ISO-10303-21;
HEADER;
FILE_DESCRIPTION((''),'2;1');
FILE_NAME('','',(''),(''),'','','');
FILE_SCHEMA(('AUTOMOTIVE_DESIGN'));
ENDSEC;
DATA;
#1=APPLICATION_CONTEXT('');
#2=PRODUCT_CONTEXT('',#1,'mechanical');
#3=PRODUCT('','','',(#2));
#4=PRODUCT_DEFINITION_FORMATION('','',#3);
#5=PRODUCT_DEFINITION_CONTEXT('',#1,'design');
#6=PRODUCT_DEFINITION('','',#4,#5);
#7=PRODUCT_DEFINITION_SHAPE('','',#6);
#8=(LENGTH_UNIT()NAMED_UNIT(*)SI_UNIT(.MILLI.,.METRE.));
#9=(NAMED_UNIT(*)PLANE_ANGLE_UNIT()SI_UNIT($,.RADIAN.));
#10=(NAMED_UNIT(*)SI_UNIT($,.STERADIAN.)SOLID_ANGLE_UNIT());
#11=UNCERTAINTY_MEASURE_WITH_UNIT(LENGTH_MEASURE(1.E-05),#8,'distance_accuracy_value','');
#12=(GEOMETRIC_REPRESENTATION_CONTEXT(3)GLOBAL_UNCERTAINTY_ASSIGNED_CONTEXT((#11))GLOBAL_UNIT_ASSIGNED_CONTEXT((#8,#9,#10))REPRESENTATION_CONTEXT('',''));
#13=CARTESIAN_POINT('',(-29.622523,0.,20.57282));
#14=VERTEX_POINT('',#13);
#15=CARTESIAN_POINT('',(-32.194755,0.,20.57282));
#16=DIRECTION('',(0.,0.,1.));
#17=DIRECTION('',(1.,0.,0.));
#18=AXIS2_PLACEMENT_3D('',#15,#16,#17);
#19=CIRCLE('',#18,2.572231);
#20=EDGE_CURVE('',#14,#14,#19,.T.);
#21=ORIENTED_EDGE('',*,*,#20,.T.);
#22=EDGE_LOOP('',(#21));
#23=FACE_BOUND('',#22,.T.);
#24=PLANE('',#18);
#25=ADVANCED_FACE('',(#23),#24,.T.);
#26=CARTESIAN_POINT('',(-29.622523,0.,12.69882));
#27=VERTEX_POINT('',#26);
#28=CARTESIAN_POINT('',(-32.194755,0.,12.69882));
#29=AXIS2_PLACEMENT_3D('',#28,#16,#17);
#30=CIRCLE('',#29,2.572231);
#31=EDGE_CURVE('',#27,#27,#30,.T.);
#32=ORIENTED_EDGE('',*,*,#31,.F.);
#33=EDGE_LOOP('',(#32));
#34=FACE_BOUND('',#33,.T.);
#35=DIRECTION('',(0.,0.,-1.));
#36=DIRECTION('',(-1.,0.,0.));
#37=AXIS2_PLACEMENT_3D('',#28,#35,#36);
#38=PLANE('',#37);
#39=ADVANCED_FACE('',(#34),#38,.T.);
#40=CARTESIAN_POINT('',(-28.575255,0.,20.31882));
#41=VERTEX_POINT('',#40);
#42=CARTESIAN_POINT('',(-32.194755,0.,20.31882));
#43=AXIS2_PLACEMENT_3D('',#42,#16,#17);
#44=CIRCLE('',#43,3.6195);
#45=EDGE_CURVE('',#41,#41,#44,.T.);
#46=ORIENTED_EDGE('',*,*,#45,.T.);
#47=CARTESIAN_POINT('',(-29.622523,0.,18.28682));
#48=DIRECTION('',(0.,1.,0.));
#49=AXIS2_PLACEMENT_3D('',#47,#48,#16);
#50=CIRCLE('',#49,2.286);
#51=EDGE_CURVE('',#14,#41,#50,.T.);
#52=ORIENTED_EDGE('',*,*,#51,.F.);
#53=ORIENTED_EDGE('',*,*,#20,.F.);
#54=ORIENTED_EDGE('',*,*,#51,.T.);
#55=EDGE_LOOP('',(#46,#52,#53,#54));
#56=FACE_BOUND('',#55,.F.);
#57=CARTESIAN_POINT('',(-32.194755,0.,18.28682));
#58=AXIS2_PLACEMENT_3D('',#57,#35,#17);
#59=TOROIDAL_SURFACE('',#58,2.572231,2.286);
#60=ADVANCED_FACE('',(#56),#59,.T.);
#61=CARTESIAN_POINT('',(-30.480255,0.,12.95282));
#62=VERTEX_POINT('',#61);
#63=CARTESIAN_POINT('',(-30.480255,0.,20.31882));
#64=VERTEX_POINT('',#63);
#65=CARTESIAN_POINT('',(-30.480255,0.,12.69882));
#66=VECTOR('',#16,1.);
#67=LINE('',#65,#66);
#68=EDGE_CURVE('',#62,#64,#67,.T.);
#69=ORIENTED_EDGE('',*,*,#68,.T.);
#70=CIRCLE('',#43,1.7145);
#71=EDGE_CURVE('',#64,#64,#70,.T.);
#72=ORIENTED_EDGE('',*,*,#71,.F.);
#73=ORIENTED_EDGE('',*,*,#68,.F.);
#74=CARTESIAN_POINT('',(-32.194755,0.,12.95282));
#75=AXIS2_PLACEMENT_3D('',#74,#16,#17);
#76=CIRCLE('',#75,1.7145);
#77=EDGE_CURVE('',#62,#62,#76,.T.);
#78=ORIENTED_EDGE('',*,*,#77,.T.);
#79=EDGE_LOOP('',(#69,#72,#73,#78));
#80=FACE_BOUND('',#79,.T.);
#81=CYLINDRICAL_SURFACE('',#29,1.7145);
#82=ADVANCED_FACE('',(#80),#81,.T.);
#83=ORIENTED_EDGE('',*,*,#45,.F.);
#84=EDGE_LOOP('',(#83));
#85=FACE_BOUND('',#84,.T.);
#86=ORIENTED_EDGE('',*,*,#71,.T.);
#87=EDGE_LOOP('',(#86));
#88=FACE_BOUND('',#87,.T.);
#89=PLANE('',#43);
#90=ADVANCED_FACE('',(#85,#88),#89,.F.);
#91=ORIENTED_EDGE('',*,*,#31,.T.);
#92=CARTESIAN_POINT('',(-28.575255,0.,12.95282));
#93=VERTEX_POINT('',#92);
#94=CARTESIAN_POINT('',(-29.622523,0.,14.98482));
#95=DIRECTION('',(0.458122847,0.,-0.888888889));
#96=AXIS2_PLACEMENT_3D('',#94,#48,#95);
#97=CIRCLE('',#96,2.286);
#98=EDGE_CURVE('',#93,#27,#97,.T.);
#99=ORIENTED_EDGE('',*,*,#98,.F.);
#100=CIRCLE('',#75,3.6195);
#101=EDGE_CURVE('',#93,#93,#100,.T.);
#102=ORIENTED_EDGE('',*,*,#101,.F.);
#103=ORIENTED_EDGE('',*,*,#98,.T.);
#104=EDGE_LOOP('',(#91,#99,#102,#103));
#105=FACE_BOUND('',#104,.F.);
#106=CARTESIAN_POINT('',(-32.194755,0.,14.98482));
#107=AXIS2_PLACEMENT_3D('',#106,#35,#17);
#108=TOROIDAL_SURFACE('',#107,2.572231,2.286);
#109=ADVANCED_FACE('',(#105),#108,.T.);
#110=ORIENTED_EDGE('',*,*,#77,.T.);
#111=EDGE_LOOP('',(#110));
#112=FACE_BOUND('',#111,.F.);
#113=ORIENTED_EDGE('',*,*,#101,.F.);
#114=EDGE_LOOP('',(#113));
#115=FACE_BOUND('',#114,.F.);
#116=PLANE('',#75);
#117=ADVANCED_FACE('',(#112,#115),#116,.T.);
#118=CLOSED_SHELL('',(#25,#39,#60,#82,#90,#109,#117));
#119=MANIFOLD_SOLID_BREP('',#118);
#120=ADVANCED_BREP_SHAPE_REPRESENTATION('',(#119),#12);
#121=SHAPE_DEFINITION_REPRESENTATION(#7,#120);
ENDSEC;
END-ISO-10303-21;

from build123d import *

# Parameters (mm, degrees)
F0_W = 1.905
F0_H = 0.254


# Not quite as in the source:
# - a fillet or chamfer that OpenCascade refuses, or shapes differently, is made with other operations: its cross-section is extruded or revolved along the edge and cut away or added


with BuildPart() as f1:
    # F0 (on Front) → F1 (revolve)
    with BuildSketch(Plane.XZ):
        with Locations((-29.5277546042, 20.4458203979)):
            Rectangle(F0_W, F0_H)
        Polygon((-30.4802546042, 20.3188203979), (-30.4802546042, 20.5728203979), (-32.1947546042, 20.5728203979), (-32.1947546042, 12.6988203979), (-30.4802546042, 12.6988203979), (-30.4802546042, 12.9528203979), align=None)
        with Locations((-29.5277546042, 12.8258203979)):
            Rectangle(F0_W, F0_H)
    revolve(axis=Axis((-32.1947546042, 0, 16.6358203979), (0, 0, 1)))

    # F2: fillet of radius 2.286 on 1 edges, made by hand

    # F2_s1 → F2_t2 (revolve, cut)
    with BuildSketch(Plane.XZ):
        with BuildLine():
            ThreePointArc((-29.6225234331, 20.5728203979), (-29.0837080659, 20.5084130698), (-28.5752546042, 20.3188203979))
            Line((-28.5752546042, 20.3188203979), (-28.5752546042, 20.5728203979))
            Line((-28.5752546042, 20.5728203979), (-29.6225234331, 20.5728203979))
        make_face()
    revolve(axis=Axis((-32.1947546042, 0, 20.5728203979), (0, 0, 1)), mode=Mode.SUBTRACT)

    # F3: fillet of radius 2.286 on 1 edges, made by hand

    # F3_s1 → F3_t2 (revolve, cut)
    with BuildSketch(Plane.XZ):
        with BuildLine():
            ThreePointArc((-28.5752546042, 12.9528203979), (-29.0837080659, 12.763227726), (-29.6225234331, 12.6988203979))
            Line((-29.6225234331, 12.6988203979), (-28.5752546042, 12.6988203979))
            Line((-28.5752546042, 12.6988203979), (-28.5752546042, 12.9528203979))
        make_face()
    revolve(axis=Axis((-32.1947546042, 0, 12.6988203979), (0, 0, 1)), mode=Mode.SUBTRACT)


solid = f1.part
